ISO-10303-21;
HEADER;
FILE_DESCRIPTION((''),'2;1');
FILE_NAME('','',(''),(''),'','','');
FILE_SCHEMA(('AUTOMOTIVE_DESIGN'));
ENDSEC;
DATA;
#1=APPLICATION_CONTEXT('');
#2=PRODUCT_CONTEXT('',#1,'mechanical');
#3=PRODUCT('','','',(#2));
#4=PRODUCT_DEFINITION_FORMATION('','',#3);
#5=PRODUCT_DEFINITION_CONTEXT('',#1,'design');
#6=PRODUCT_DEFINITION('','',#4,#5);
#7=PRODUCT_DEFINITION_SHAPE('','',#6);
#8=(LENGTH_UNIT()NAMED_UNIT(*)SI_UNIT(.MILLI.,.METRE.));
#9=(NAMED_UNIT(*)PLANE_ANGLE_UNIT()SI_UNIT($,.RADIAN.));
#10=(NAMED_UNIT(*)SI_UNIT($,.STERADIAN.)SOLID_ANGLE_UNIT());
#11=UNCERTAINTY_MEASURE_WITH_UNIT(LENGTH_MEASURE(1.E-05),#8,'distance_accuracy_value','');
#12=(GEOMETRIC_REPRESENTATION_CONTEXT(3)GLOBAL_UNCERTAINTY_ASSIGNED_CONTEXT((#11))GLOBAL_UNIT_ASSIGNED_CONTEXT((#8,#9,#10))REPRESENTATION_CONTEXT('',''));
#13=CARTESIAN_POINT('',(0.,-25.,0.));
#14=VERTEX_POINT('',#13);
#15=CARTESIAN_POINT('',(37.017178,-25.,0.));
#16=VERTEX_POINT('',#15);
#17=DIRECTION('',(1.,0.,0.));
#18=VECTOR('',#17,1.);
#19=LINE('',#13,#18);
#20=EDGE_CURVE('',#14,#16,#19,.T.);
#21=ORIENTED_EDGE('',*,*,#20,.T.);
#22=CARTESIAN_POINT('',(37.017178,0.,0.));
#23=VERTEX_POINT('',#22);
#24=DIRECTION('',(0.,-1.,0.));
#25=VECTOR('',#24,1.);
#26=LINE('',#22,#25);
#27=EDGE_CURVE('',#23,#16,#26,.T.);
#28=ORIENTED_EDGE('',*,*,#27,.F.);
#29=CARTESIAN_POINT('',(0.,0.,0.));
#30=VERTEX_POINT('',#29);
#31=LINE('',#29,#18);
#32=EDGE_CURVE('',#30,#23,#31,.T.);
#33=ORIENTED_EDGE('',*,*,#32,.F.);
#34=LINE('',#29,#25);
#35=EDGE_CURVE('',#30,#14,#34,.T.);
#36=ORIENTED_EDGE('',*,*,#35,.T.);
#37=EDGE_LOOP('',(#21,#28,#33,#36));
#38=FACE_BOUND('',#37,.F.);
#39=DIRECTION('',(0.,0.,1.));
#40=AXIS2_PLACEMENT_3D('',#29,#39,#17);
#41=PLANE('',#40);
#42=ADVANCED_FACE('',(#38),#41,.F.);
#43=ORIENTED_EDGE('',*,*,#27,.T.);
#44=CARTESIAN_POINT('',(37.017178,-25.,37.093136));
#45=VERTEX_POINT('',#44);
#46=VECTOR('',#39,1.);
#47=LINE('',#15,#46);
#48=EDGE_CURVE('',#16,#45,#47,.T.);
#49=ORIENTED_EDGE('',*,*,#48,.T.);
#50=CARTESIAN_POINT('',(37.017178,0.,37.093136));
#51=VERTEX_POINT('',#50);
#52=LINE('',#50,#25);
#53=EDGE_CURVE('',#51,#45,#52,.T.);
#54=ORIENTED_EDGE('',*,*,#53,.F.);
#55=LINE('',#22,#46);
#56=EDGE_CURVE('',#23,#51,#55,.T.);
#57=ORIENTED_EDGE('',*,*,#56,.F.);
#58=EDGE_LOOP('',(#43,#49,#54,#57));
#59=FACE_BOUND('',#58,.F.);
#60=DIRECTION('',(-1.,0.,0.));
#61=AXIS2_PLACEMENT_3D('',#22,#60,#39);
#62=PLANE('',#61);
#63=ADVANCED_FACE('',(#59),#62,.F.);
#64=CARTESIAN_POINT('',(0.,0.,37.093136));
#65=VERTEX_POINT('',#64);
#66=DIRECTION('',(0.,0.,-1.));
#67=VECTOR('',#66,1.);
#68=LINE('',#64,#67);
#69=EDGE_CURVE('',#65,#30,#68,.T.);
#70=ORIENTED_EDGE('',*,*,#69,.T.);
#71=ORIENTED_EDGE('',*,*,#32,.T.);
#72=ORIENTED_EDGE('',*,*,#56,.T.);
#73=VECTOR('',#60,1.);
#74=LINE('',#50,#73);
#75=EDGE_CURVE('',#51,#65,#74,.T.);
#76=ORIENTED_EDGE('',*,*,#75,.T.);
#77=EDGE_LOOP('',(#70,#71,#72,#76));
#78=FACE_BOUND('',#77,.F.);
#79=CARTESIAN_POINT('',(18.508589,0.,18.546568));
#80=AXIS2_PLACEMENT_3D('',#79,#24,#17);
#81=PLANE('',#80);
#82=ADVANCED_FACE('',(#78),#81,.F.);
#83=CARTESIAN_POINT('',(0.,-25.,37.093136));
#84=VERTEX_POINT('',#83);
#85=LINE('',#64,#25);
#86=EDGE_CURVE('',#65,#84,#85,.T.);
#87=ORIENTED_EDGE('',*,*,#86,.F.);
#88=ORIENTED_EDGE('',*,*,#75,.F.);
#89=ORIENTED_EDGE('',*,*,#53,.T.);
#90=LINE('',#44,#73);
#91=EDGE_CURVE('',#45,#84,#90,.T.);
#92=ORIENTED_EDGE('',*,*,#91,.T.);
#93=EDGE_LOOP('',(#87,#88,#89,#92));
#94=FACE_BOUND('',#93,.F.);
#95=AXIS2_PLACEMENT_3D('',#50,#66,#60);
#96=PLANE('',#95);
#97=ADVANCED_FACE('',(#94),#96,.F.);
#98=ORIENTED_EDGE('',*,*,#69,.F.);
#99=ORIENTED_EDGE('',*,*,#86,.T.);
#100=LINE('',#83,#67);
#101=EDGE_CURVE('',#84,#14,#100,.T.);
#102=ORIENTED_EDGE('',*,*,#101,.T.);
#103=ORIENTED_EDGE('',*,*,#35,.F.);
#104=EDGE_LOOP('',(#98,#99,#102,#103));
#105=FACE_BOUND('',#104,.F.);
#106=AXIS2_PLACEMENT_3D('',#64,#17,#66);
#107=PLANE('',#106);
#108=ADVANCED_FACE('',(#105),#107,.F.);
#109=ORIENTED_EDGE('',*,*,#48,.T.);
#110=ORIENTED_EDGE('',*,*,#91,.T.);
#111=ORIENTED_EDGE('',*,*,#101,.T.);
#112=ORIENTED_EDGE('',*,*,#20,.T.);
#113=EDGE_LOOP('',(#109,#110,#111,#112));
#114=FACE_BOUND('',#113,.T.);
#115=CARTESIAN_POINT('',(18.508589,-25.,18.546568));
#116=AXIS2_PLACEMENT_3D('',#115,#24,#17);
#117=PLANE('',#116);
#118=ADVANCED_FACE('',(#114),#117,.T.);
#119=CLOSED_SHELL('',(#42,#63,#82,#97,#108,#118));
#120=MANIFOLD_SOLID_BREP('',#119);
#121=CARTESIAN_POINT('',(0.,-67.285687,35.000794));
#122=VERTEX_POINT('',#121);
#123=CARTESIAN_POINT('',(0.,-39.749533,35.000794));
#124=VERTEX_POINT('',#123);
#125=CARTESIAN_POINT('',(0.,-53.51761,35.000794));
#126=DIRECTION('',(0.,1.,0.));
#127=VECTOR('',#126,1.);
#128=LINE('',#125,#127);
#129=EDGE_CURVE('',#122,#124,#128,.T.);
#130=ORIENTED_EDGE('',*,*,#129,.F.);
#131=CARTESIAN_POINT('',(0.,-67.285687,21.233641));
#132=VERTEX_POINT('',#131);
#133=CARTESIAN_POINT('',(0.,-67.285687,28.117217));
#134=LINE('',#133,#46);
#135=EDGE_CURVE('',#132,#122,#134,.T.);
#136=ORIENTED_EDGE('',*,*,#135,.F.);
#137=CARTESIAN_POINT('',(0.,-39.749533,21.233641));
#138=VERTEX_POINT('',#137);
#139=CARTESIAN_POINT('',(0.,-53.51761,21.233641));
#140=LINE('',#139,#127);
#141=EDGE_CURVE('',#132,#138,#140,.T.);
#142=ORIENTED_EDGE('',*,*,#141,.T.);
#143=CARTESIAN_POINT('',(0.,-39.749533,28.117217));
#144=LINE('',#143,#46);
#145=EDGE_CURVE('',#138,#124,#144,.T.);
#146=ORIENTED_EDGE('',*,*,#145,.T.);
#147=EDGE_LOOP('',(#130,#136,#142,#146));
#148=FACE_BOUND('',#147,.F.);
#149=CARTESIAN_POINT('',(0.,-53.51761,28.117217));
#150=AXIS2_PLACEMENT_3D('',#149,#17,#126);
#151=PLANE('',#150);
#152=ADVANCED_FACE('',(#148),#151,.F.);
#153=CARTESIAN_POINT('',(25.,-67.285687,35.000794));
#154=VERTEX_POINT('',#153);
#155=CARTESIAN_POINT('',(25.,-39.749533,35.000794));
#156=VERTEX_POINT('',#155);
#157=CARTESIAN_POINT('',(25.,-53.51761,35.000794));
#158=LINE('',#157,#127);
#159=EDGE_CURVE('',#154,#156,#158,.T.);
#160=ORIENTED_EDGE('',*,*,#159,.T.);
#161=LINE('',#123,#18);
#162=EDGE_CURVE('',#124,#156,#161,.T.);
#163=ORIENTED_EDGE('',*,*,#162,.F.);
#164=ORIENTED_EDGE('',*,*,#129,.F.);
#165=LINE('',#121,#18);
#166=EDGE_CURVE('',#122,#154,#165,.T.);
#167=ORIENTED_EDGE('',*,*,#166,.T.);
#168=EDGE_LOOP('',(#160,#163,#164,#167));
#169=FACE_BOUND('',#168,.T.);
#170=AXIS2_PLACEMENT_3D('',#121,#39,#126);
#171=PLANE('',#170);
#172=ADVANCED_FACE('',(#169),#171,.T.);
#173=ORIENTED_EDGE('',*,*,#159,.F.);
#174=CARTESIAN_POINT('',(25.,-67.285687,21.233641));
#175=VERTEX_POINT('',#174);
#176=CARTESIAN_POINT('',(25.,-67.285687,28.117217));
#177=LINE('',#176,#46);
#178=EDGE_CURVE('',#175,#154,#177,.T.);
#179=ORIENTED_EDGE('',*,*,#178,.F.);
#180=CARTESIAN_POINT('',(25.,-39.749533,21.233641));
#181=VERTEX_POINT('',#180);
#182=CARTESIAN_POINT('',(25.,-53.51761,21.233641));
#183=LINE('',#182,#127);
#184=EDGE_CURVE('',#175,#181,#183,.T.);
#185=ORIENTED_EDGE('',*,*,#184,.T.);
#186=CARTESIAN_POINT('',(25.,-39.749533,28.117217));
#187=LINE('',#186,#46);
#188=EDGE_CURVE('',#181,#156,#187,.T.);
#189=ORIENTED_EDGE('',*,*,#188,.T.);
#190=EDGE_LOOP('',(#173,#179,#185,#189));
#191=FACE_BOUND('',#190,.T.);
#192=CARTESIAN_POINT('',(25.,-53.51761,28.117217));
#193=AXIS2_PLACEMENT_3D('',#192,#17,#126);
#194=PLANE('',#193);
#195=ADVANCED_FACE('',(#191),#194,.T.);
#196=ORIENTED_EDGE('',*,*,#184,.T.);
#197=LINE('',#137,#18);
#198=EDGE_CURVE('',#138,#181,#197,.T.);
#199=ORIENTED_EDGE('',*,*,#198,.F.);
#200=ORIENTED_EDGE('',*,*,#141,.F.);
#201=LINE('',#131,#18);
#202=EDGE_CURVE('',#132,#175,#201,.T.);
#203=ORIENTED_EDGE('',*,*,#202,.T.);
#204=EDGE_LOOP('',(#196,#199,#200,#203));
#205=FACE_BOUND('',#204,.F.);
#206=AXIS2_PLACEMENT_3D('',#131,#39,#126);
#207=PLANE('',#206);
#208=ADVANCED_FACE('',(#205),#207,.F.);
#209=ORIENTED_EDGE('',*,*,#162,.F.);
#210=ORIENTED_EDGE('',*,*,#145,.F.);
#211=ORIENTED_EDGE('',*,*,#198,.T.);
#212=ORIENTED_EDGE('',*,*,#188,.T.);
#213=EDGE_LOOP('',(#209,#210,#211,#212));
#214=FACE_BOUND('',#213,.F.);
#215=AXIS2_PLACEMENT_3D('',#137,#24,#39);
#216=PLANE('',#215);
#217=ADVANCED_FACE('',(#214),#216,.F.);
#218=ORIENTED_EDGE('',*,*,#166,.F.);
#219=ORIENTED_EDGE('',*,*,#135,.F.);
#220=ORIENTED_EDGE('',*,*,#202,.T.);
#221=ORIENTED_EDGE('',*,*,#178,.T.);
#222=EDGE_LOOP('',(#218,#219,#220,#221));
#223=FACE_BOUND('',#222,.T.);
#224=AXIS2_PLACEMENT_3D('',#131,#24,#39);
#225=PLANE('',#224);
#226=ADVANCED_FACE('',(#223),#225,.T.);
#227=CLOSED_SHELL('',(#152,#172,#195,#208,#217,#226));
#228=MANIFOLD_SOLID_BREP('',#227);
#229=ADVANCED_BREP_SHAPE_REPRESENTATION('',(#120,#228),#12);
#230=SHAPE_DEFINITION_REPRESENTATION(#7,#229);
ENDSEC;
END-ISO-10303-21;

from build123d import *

# Parameters (mm, degrees)
F1_DEPTH = 25
F2_W     = 27.5361537933
F2_H     = 13.7671530247
F3_DEPTH = 25


# Not quite as in the source:
# - a feature names something its author has since deleted; it is built from what else it names


with BuildPart() as f1:
    # F0 (on Front) → F1 (new body)
    with BuildSketch(Plane.XZ):
        Polygon((37.0171777904, 0), (37.0171777904, 37.0931364596), (0, 37.0931364596), (0, 18.5465682298), (0, 0), align=None)
    extrude(amount=F1_DEPTH)


with BuildPart() as f3:
    # F2 (on Right) → F3 (new body)
    with BuildSketch(Plane.YZ):
        with Locations((-53.5176098347, 28.1172171235)):
            Rectangle(F2_W, F2_H)
    extrude(amount=F3_DEPTH)


solid = Compound([f1.part, f3.part])
